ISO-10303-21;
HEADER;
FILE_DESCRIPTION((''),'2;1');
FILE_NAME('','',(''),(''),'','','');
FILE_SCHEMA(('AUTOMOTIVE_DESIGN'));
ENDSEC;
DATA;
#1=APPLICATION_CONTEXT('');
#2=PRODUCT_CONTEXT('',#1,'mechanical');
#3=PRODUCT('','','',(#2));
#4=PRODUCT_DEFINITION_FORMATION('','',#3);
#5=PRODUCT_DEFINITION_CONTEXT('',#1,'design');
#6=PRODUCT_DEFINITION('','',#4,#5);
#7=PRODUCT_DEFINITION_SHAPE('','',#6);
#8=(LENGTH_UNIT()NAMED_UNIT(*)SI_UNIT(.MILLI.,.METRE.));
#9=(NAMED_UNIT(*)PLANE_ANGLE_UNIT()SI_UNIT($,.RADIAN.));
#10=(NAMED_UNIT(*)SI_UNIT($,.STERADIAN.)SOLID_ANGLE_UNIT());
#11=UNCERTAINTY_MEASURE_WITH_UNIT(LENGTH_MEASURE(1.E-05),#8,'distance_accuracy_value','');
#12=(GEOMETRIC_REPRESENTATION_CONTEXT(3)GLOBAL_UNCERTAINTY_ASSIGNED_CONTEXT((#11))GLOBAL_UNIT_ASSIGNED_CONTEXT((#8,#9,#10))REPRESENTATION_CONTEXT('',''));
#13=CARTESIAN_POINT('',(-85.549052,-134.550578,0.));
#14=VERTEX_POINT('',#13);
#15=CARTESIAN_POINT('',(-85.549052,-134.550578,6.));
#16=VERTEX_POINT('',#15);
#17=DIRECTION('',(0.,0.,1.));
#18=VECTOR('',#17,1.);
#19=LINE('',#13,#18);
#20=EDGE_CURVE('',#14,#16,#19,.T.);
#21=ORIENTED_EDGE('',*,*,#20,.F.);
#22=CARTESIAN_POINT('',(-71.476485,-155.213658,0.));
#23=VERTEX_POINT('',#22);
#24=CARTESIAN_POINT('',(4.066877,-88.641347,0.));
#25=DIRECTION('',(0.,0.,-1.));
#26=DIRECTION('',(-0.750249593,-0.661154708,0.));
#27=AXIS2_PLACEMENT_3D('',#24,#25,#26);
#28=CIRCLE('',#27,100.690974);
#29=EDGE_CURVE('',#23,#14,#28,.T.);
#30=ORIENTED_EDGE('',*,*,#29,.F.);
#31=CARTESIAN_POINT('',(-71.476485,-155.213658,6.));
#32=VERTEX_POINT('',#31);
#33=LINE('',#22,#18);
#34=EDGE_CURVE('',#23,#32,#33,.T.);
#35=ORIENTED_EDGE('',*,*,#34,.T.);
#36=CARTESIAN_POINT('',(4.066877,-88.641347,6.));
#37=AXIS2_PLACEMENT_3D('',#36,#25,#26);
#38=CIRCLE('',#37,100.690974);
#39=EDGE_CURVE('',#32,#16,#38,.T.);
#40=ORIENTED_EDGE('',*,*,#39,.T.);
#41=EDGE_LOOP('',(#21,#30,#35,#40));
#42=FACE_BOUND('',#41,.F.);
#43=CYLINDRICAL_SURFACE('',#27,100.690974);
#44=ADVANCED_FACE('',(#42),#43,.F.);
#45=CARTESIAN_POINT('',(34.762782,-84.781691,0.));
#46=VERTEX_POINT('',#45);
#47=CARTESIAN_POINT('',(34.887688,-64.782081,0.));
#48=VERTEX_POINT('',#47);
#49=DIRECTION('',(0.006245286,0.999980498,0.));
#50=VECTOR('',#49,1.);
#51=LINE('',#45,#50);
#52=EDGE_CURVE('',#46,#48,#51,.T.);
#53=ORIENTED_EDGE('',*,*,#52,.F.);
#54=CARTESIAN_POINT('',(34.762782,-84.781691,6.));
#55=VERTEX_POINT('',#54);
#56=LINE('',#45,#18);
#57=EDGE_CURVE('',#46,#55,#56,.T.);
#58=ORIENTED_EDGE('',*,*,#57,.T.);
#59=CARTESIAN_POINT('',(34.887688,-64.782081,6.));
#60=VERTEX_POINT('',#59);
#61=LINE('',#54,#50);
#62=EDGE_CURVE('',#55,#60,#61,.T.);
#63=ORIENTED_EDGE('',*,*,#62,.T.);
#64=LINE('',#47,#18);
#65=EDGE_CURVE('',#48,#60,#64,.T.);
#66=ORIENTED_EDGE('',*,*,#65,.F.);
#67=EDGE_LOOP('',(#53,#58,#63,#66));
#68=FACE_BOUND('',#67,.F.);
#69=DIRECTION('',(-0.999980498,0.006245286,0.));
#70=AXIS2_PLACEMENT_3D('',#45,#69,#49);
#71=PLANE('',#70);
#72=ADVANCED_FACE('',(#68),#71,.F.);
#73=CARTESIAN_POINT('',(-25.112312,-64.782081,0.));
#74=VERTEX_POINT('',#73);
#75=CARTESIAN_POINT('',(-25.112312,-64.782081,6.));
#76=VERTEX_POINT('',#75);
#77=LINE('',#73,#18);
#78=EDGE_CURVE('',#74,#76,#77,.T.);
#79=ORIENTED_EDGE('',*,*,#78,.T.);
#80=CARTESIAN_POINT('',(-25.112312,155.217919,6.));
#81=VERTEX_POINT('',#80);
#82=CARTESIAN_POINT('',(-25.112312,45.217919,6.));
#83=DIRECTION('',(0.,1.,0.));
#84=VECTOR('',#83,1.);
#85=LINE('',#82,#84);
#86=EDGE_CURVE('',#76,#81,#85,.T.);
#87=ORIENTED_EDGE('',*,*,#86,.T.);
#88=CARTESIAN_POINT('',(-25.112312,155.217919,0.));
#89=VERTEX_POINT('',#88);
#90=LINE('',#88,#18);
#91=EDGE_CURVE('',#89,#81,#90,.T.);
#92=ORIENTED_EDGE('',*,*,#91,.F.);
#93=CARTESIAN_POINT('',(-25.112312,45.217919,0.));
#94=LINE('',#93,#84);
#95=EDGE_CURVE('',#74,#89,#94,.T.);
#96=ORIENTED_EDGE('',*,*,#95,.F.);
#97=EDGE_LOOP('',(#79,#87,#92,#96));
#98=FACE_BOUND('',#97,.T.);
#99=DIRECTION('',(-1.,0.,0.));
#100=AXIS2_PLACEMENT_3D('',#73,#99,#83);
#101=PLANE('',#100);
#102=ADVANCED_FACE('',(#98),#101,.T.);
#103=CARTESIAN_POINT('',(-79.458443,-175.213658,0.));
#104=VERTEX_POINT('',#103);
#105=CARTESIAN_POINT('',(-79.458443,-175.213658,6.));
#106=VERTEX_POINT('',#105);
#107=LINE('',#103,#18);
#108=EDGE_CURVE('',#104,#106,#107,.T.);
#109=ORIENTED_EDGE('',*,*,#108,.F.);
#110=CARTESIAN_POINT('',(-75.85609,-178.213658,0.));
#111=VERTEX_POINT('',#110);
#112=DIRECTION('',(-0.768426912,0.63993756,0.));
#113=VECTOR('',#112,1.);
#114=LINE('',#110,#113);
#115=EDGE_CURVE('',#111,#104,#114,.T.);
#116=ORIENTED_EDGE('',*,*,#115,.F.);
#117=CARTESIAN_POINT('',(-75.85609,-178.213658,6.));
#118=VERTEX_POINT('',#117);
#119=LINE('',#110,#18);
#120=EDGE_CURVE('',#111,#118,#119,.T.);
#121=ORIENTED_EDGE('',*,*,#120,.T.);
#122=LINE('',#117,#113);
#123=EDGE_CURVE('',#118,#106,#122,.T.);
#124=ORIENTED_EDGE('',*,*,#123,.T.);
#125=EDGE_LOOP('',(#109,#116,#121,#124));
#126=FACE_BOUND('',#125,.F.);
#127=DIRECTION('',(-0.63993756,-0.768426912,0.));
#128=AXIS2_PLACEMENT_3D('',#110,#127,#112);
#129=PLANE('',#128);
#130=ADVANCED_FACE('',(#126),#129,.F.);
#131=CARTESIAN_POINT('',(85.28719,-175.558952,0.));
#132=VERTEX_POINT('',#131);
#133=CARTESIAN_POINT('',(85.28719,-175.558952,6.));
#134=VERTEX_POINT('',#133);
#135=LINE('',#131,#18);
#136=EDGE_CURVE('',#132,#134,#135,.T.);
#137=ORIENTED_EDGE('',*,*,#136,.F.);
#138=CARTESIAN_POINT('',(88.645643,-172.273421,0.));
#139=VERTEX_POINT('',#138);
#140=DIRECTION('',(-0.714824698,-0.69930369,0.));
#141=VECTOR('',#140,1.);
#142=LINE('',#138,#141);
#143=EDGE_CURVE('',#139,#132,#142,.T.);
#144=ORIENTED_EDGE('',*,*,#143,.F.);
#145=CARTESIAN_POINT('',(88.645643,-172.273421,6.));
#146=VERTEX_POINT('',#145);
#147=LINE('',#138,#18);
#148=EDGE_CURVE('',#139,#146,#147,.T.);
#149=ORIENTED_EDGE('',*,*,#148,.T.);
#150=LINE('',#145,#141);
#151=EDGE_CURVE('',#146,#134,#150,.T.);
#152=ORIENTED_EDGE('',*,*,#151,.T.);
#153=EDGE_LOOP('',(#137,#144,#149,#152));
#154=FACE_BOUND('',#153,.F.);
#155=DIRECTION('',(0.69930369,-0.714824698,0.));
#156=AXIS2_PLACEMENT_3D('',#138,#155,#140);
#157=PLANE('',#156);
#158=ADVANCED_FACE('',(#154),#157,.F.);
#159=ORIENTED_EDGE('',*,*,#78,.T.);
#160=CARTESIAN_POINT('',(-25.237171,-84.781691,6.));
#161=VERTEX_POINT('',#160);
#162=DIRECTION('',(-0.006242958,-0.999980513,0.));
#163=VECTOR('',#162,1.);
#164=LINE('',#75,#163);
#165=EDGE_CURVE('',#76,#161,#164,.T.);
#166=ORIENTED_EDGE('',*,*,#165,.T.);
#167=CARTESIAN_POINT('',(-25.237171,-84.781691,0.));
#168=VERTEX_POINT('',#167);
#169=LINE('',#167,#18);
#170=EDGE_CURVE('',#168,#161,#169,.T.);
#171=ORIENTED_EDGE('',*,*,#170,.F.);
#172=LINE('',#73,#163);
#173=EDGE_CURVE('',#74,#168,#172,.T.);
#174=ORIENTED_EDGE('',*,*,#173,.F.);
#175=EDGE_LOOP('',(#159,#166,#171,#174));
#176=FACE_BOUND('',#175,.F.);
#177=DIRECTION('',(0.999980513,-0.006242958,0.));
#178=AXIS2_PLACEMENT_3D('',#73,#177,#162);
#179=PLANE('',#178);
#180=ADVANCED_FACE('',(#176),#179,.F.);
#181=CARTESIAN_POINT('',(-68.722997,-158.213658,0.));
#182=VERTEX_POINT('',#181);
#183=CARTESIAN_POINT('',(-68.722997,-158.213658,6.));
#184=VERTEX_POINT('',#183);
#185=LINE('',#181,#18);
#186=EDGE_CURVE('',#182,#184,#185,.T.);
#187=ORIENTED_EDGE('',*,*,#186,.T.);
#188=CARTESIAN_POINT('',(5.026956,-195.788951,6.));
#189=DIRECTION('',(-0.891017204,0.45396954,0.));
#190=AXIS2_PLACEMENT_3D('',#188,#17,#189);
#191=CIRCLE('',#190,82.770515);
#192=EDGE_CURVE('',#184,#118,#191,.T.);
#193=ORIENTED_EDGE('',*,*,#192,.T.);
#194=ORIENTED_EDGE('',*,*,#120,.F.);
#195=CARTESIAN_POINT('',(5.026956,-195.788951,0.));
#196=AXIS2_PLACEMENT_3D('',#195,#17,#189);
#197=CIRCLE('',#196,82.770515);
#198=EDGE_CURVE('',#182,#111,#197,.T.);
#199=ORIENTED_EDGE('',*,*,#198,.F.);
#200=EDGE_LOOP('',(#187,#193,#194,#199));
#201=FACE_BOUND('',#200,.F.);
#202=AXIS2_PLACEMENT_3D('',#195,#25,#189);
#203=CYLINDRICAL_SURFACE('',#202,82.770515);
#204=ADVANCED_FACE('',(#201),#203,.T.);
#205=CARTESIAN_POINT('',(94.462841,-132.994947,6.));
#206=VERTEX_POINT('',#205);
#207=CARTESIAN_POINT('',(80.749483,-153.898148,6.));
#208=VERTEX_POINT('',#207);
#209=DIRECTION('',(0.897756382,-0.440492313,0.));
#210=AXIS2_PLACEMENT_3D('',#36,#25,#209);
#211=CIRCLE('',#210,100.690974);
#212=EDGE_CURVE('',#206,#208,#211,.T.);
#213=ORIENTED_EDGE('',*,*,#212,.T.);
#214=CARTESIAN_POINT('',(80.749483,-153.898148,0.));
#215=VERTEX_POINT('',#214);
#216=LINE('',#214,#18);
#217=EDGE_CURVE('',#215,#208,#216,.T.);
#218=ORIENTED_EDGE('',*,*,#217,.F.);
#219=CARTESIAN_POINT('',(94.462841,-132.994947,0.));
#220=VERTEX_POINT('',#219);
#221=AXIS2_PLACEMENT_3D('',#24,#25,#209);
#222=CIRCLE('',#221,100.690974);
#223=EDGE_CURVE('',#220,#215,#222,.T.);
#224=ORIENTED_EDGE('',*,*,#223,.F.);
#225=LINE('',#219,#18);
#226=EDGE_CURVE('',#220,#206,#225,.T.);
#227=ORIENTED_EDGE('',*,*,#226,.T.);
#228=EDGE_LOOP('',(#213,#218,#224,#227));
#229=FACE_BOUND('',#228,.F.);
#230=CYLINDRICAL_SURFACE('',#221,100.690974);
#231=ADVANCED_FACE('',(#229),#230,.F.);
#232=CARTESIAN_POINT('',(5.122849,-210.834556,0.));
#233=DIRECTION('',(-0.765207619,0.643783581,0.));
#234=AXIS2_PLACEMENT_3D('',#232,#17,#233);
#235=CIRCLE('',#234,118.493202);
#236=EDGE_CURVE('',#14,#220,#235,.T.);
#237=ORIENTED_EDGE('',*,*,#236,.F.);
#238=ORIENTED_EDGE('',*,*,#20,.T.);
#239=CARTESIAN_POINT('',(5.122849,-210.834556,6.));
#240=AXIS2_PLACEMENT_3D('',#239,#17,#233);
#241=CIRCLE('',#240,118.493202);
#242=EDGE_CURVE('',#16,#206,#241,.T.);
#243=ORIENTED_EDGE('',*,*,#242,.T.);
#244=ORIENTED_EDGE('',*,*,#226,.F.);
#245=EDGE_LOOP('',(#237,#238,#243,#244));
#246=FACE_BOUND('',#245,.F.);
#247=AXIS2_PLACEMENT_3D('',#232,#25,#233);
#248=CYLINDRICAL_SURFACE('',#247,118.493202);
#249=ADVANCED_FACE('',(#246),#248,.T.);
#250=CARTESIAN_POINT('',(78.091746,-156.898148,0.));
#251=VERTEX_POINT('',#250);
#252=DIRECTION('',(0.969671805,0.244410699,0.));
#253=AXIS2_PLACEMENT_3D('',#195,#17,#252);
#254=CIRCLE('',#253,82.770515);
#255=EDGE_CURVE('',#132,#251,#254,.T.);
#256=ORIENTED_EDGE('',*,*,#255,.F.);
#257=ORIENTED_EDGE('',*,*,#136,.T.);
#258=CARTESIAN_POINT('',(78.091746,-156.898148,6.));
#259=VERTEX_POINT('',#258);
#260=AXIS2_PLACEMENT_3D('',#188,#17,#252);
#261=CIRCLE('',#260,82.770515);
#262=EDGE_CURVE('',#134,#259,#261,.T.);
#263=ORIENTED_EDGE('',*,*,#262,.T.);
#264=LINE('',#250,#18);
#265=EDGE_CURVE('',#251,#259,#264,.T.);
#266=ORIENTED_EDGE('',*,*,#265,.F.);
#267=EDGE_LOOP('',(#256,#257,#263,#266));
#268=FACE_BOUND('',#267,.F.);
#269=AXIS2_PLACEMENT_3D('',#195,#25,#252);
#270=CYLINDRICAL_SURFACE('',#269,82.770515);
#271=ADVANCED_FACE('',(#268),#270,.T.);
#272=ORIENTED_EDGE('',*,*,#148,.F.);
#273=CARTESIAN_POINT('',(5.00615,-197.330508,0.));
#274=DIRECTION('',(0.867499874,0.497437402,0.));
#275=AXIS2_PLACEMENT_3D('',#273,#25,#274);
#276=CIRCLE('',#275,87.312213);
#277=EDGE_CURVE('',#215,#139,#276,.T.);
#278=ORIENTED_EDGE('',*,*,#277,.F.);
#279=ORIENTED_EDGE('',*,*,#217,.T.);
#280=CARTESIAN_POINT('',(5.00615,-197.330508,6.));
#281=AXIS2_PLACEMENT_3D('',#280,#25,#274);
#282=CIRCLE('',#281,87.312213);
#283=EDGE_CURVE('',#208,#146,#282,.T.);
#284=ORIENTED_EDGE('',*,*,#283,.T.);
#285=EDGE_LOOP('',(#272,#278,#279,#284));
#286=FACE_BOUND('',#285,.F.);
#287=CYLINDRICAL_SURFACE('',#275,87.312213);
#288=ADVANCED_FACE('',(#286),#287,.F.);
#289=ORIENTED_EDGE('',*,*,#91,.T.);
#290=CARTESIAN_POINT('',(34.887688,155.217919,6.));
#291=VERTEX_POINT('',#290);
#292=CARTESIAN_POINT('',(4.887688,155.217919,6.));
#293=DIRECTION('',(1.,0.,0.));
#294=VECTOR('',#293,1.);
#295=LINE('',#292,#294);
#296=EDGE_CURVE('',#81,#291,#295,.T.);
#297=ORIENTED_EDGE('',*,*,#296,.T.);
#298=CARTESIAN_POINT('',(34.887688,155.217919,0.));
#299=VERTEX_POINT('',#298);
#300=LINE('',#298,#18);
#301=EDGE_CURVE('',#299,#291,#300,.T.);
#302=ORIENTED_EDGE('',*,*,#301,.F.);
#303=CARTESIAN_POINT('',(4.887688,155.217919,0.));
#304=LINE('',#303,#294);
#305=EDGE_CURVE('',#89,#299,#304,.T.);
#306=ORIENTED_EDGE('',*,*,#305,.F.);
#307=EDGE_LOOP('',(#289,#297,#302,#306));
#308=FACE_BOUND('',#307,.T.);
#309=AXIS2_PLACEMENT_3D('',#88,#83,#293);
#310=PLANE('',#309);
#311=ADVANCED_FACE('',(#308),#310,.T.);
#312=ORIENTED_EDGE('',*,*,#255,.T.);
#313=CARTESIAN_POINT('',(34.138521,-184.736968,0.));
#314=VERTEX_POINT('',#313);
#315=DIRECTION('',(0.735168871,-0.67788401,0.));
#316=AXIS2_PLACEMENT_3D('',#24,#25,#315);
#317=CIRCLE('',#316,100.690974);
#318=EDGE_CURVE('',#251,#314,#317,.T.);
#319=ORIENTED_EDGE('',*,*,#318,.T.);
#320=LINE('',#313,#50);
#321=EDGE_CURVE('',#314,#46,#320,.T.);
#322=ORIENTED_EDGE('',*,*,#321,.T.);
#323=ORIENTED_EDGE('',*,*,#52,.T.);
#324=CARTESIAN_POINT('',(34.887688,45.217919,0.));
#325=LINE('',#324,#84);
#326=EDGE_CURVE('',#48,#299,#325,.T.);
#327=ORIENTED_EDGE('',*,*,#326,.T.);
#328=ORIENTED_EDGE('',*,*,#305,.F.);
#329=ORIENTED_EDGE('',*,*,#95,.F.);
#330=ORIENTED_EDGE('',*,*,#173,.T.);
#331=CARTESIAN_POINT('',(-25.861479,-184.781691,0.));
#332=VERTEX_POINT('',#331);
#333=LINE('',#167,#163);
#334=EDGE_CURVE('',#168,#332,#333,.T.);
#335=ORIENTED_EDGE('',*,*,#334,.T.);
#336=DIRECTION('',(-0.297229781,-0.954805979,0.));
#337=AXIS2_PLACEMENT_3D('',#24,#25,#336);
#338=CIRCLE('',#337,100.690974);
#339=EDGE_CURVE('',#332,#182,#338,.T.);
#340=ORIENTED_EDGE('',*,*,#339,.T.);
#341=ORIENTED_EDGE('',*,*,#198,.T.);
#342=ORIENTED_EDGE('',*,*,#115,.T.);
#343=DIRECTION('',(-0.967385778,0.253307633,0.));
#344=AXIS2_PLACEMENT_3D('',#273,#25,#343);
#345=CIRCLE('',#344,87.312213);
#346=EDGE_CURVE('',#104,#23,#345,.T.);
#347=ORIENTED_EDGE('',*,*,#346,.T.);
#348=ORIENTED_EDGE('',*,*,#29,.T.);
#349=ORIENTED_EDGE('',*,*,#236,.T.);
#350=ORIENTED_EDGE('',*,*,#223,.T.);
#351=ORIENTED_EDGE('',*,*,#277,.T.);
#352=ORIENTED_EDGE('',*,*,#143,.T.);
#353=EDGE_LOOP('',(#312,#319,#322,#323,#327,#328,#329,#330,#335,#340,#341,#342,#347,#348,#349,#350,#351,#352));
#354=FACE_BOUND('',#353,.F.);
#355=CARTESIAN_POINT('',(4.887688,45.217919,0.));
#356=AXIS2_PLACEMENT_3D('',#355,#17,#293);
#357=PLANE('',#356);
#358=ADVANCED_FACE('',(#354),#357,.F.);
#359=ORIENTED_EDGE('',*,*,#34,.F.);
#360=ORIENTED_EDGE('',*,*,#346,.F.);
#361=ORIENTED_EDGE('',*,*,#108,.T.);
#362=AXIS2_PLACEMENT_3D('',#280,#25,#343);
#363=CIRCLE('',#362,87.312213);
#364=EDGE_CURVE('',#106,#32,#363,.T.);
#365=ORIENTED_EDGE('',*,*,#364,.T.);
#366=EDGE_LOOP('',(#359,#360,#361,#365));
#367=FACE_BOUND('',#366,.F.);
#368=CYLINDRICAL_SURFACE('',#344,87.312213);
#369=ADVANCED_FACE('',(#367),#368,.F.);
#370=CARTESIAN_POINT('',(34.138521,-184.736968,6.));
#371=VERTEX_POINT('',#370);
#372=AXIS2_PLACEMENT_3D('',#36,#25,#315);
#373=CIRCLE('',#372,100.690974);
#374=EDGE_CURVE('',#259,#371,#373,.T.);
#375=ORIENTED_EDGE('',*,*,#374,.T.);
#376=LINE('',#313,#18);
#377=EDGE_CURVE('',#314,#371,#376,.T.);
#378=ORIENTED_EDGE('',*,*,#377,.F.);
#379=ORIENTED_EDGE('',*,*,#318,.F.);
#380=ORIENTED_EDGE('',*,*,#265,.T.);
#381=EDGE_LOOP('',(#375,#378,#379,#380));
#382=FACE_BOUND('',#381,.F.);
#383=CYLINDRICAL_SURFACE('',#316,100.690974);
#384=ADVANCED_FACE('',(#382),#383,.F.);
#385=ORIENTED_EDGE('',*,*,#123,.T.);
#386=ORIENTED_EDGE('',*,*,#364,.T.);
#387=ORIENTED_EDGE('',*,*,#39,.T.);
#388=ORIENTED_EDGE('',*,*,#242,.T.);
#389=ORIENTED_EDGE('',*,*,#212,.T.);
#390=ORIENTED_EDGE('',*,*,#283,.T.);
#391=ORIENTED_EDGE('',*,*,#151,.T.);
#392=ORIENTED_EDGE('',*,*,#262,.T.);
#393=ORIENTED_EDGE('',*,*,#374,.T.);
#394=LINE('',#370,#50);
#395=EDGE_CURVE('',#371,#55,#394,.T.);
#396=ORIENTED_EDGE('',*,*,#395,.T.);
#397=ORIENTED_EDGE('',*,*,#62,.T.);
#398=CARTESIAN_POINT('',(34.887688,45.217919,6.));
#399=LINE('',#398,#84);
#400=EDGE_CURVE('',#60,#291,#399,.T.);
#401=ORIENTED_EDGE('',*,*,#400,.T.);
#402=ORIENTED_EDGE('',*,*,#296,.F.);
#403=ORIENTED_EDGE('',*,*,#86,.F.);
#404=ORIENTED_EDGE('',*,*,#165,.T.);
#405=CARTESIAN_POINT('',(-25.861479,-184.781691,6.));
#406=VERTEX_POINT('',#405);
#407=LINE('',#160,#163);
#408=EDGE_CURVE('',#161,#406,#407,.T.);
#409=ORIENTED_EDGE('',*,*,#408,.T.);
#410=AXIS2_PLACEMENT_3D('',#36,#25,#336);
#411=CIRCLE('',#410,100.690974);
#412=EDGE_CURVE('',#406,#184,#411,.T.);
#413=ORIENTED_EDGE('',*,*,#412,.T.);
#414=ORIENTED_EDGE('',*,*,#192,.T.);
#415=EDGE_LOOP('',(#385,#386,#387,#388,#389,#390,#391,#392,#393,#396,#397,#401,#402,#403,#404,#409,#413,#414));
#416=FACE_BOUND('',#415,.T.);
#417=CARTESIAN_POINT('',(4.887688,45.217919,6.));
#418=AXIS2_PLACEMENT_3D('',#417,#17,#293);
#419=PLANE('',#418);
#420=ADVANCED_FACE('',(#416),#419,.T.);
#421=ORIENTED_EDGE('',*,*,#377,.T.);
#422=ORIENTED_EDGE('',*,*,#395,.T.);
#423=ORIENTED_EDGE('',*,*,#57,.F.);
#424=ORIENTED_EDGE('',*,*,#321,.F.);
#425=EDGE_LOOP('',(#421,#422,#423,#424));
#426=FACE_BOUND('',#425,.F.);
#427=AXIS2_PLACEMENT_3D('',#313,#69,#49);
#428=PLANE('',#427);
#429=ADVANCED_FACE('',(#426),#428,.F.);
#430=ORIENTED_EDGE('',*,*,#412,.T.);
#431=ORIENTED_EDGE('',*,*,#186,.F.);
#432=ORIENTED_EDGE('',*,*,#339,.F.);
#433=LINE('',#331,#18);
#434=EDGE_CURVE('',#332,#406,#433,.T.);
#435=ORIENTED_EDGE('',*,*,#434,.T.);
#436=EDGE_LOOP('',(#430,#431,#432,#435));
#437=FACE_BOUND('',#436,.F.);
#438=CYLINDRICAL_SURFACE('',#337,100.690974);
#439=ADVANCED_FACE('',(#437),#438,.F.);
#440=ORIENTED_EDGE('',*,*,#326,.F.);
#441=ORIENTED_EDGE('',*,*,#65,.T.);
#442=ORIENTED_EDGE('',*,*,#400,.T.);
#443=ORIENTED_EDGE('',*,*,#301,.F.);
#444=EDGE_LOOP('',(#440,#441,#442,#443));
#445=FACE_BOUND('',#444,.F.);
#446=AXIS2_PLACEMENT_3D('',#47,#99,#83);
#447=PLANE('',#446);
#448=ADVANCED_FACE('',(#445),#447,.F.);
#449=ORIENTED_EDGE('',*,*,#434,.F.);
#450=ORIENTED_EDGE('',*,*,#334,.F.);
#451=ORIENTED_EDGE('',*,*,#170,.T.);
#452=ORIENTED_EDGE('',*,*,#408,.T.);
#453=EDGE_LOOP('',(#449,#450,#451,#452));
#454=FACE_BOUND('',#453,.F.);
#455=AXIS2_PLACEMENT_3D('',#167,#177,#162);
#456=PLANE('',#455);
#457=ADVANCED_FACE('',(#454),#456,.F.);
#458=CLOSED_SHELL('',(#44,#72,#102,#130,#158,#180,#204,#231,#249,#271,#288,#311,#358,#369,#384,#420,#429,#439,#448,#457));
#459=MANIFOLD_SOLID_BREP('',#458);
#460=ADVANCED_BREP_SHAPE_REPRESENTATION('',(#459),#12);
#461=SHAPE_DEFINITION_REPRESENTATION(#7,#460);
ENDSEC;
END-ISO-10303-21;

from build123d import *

# Parameters (mm, degrees)
F0_W     = 60
F0_H     = 220
F1_DEPTH = 6


# Not quite as in the source:
# - the program builds the solid bodies; features that only make, move or delete a surface that nothing else refers to are left out


with BuildPart() as f1:
    # F0 (on Top) → F1 (new body)
    with BuildSketch(Plane.XY):
        with Locations((4.8876879096, 45.2179194741)):
            Rectangle(F0_W, F0_H)
        with BuildLine():
            ThreePointArc((-79.4584430704, -175.2136584167), (-76.086405566, -164.9666401832), (-71.4764851469, -155.2136584167))
            ThreePointArc((-71.4764851469, -155.2136584167), (-79.1565485083, -145.3205641479), (-85.5490516624, -134.5505784994))
            ThreePointArc((-85.5490516624, -134.5505784994), (6.1468085688, -329.3233337338), (94.4628409087, -132.9949471034))
            ThreePointArc((94.4628409087, -132.9949471034), (88.2574232589, -143.8738017875), (80.7494829473, -153.8981481364))
            ThreePointArc((80.7494829473, -153.8981481364), (85.2254366965, -162.8589485125), (88.6456429035, -172.2734211397))
            ThreePointArc((88.6456429035, -172.2734211397), (75.2367314586, -249.2062042963), (5.6459887203, -284.6403764396))
            ThreePointArc((5.6459887203, -284.6403764396), (-63.9155377146, -250.9329661403), (-79.4584430704, -175.2136584167))
        make_face()
        with BuildLine():
            ThreePointArc((4.8876879096, -189.3289751767), (-10.6634233248, -188.2490297182), (-25.8614792361, -184.7816907769))
            ThreePointArc((-25.8614792361, -184.7816907769), (-48.9823809676, -174.2243385437), (-68.7229965841, -158.2136584167))
            ThreePointArc((-68.7229965841, -158.2136584167), (-72.9335538665, -167.9839691049), (-75.8560904631, -178.2136584167))
            ThreePointArc((-75.8560904631, -178.2136584167), (-59.2361153237, -247.9542245013), (5.5975931326, -278.5574984969))
            Line((5.5975931326, -278.5574984969), (4.8876879096, -189.3289751767))
        make_face()
        with BuildLine():
            ThreePointArc((78.0917461365, -156.8981481364), (57.9442467877, -173.7054474984), (34.1385207639, -184.7369682609))
            ThreePointArc((34.1385207639, -184.7369682609), (19.6828166371, -188.1140297879), (4.8876879096, -189.3289751767))
            Line((4.8876879096, -189.3289751767), (5.5975931326, -278.5574984969))
            ThreePointArc((5.5975931326, -278.5574984969), (70.4913174106, -246.4384867175), (85.2871903638, -175.5589515052))
            ThreePointArc((85.2871903638, -175.5589515052), (82.255170922, -166.010419768), (78.0917461365, -156.8981481364))
        make_face()
        with BuildLine():
            ThreePointArc((5.5975931326, -278.5574984969), (-59.2361153237, -247.9542245013), (-75.8560904631, -178.2136584167))
            Line((-75.8560904631, -178.2136584167), (-79.4584430704, -175.2136584167))
            ThreePointArc((-79.4584430704, -175.2136584167), (-63.9155377146, -250.9329661403), (5.6459887203, -284.6403764396))
            Line((5.6459887203, -284.6403764396), (5.5975931326, -278.5574984969))
        make_face()
        with BuildLine():
            ThreePointArc((85.2871903638, -175.5589515052), (70.4913174106, -246.4384867175), (5.5975931326, -278.5574984969))
            Line((5.5975931326, -278.5574984969), (5.6459887203, -284.6403764396))
            ThreePointArc((5.6459887203, -284.6403764396), (75.2367314586, -249.2062042963), (88.6456429035, -172.2734211397))
            Line((88.6456429035, -172.2734211397), (85.2871903638, -175.5589515052))
        make_face()
        with BuildLine():
            Line((34.7627821954, -84.7816907769), (-25.2371712536, -84.7816907769))
            Line((-25.2371712536, -84.7816907769), (-25.8614792361, -184.7816907769))
            ThreePointArc((-25.8614792361, -184.7816907769), (-10.6634233248, -188.2490297182), (4.8876879096, -189.3289751767))
            ThreePointArc((4.8876879096, -189.3289751767), (19.6828166371, -188.1140297879), (34.1385207639, -184.7369682609))
            Line((34.1385207639, -184.7369682609), (34.7627821954, -84.7816907769))
        make_face()
        Polygon((34.8876879096, -64.7820805259), (-25.1123120904, -64.7820805259), (-25.2371712536, -84.7816907769), (34.7627821954, -84.7816907769), align=None)
    extrude(amount=F1_DEPTH)


solid = f1.part
